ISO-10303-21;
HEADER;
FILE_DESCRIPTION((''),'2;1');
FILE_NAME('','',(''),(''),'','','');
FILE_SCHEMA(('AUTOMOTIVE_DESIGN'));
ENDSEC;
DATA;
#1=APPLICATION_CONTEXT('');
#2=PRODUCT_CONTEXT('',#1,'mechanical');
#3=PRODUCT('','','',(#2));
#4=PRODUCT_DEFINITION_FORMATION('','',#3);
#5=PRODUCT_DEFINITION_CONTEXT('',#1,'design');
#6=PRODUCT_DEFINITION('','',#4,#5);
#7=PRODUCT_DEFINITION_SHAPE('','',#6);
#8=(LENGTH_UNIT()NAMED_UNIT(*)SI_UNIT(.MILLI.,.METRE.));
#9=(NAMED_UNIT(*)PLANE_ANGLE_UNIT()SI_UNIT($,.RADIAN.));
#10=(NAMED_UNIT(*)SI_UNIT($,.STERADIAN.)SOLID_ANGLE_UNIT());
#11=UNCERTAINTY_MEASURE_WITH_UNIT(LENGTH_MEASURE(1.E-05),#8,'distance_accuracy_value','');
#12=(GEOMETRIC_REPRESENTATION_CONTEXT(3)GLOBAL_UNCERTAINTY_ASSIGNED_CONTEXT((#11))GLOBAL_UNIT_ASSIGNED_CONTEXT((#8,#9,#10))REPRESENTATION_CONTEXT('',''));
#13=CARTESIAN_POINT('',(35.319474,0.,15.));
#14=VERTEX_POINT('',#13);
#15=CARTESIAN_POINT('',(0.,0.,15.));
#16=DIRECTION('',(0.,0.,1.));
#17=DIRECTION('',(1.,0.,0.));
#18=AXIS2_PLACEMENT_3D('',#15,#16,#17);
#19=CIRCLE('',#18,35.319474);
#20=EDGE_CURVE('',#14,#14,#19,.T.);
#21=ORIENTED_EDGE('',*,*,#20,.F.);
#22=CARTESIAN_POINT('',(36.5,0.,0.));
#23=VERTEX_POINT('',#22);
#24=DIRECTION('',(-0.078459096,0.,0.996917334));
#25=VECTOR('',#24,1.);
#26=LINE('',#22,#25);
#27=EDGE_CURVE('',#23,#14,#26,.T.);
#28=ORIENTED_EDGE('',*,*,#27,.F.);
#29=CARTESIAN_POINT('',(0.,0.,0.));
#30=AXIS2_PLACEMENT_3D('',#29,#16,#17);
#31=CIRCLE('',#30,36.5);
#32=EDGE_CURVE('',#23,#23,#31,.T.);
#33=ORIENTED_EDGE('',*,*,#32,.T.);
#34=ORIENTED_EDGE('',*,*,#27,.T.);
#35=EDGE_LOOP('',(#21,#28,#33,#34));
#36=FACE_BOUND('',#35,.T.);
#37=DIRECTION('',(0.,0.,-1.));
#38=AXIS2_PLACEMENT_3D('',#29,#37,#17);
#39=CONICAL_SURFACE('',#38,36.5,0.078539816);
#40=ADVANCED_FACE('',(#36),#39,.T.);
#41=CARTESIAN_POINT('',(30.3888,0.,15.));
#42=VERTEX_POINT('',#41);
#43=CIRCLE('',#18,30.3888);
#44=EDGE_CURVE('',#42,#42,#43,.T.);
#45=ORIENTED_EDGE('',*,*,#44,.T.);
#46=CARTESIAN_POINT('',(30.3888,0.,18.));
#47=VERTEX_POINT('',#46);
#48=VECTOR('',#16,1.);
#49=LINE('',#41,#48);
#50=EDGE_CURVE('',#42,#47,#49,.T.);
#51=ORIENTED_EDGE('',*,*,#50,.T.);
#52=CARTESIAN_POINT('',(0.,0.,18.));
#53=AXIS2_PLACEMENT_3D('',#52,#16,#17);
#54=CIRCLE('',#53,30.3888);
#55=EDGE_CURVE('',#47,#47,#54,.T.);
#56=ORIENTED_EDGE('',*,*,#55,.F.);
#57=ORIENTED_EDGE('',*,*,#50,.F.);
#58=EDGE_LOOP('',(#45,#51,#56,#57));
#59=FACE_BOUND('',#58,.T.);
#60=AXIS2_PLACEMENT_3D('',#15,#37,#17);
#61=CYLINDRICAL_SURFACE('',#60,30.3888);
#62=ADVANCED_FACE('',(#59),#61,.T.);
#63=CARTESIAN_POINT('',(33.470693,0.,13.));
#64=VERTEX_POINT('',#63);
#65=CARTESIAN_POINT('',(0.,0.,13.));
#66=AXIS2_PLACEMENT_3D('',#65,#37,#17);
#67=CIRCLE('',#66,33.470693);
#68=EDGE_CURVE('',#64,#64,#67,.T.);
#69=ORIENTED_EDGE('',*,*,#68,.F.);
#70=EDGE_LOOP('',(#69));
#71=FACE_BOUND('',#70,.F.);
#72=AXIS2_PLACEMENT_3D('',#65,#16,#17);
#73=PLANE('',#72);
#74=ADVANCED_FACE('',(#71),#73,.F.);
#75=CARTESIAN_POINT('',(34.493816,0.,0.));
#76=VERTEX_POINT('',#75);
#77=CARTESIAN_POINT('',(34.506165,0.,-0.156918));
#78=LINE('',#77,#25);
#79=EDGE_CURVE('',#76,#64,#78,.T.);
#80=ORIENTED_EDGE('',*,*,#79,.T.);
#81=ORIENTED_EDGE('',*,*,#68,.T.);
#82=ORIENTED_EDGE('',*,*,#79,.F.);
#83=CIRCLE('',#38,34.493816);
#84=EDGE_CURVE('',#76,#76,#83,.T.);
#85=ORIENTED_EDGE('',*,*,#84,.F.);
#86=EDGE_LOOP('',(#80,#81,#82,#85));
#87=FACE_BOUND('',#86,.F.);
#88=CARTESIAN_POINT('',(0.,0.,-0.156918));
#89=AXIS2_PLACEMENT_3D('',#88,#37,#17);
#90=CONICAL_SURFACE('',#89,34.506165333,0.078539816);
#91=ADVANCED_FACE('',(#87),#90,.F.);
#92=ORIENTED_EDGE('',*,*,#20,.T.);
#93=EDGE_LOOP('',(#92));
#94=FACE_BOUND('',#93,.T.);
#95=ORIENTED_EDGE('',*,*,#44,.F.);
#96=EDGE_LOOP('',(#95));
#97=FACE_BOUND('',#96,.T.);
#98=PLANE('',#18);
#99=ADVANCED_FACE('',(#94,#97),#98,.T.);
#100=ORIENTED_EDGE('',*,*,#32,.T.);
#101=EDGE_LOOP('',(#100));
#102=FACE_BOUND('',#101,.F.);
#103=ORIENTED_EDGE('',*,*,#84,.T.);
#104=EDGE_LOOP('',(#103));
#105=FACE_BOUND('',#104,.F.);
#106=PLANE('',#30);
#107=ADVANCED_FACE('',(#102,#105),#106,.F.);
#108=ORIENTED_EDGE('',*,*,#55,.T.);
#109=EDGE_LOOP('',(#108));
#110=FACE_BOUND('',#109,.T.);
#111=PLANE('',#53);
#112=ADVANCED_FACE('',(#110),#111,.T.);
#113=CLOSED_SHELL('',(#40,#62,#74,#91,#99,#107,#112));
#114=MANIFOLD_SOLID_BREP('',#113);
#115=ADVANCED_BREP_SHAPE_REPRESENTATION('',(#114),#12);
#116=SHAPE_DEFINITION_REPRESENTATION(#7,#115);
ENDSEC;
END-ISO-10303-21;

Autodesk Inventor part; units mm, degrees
ref_plane "YZ Plane" through (0, 0, 0) normal (1, 0, 0) x (0, 1, 0)
ref_plane "XZ Plane" through (0, 0, 0) normal (0, 1, 0) x (-1, 0, 0)
ref_plane "XY Plane" through (0, 0, 0) normal (0, 0, 1) x (1, 0, 0)
sketch "Эскиз2" plane through (0, 0, 0) normal (0, 0, 1) x (1, 0, 0)
  circle A0 centre (0, 0) radius 36.5
  circle A1 centre (0, 0) radius 32.0179
  dimension "d2" = 73
extrude "Выдавливание1" add sketch "Эскиз2" along normal blind 15 contours A0 | A1
draft "НаклГрань1" angle 4.5 pull direction (0, 0, 1) faces at (36.3902, -2.8285, 10) fixed edges at (-36.5, 0, 0)
shell "Оболочка1" thickness 2 removed faces 1 at (4.5012, 0.5261, 0)
sketch "Эскиз3" plane through (0, 0, 15) normal (0, 0, 1) x (1, 0, 0)
  circle A0 centre (0, 0) radius 30.3888
extrude "Выдавливание2" add sketch "Эскиз3" along normal blind 3
properties part number "CUP"
